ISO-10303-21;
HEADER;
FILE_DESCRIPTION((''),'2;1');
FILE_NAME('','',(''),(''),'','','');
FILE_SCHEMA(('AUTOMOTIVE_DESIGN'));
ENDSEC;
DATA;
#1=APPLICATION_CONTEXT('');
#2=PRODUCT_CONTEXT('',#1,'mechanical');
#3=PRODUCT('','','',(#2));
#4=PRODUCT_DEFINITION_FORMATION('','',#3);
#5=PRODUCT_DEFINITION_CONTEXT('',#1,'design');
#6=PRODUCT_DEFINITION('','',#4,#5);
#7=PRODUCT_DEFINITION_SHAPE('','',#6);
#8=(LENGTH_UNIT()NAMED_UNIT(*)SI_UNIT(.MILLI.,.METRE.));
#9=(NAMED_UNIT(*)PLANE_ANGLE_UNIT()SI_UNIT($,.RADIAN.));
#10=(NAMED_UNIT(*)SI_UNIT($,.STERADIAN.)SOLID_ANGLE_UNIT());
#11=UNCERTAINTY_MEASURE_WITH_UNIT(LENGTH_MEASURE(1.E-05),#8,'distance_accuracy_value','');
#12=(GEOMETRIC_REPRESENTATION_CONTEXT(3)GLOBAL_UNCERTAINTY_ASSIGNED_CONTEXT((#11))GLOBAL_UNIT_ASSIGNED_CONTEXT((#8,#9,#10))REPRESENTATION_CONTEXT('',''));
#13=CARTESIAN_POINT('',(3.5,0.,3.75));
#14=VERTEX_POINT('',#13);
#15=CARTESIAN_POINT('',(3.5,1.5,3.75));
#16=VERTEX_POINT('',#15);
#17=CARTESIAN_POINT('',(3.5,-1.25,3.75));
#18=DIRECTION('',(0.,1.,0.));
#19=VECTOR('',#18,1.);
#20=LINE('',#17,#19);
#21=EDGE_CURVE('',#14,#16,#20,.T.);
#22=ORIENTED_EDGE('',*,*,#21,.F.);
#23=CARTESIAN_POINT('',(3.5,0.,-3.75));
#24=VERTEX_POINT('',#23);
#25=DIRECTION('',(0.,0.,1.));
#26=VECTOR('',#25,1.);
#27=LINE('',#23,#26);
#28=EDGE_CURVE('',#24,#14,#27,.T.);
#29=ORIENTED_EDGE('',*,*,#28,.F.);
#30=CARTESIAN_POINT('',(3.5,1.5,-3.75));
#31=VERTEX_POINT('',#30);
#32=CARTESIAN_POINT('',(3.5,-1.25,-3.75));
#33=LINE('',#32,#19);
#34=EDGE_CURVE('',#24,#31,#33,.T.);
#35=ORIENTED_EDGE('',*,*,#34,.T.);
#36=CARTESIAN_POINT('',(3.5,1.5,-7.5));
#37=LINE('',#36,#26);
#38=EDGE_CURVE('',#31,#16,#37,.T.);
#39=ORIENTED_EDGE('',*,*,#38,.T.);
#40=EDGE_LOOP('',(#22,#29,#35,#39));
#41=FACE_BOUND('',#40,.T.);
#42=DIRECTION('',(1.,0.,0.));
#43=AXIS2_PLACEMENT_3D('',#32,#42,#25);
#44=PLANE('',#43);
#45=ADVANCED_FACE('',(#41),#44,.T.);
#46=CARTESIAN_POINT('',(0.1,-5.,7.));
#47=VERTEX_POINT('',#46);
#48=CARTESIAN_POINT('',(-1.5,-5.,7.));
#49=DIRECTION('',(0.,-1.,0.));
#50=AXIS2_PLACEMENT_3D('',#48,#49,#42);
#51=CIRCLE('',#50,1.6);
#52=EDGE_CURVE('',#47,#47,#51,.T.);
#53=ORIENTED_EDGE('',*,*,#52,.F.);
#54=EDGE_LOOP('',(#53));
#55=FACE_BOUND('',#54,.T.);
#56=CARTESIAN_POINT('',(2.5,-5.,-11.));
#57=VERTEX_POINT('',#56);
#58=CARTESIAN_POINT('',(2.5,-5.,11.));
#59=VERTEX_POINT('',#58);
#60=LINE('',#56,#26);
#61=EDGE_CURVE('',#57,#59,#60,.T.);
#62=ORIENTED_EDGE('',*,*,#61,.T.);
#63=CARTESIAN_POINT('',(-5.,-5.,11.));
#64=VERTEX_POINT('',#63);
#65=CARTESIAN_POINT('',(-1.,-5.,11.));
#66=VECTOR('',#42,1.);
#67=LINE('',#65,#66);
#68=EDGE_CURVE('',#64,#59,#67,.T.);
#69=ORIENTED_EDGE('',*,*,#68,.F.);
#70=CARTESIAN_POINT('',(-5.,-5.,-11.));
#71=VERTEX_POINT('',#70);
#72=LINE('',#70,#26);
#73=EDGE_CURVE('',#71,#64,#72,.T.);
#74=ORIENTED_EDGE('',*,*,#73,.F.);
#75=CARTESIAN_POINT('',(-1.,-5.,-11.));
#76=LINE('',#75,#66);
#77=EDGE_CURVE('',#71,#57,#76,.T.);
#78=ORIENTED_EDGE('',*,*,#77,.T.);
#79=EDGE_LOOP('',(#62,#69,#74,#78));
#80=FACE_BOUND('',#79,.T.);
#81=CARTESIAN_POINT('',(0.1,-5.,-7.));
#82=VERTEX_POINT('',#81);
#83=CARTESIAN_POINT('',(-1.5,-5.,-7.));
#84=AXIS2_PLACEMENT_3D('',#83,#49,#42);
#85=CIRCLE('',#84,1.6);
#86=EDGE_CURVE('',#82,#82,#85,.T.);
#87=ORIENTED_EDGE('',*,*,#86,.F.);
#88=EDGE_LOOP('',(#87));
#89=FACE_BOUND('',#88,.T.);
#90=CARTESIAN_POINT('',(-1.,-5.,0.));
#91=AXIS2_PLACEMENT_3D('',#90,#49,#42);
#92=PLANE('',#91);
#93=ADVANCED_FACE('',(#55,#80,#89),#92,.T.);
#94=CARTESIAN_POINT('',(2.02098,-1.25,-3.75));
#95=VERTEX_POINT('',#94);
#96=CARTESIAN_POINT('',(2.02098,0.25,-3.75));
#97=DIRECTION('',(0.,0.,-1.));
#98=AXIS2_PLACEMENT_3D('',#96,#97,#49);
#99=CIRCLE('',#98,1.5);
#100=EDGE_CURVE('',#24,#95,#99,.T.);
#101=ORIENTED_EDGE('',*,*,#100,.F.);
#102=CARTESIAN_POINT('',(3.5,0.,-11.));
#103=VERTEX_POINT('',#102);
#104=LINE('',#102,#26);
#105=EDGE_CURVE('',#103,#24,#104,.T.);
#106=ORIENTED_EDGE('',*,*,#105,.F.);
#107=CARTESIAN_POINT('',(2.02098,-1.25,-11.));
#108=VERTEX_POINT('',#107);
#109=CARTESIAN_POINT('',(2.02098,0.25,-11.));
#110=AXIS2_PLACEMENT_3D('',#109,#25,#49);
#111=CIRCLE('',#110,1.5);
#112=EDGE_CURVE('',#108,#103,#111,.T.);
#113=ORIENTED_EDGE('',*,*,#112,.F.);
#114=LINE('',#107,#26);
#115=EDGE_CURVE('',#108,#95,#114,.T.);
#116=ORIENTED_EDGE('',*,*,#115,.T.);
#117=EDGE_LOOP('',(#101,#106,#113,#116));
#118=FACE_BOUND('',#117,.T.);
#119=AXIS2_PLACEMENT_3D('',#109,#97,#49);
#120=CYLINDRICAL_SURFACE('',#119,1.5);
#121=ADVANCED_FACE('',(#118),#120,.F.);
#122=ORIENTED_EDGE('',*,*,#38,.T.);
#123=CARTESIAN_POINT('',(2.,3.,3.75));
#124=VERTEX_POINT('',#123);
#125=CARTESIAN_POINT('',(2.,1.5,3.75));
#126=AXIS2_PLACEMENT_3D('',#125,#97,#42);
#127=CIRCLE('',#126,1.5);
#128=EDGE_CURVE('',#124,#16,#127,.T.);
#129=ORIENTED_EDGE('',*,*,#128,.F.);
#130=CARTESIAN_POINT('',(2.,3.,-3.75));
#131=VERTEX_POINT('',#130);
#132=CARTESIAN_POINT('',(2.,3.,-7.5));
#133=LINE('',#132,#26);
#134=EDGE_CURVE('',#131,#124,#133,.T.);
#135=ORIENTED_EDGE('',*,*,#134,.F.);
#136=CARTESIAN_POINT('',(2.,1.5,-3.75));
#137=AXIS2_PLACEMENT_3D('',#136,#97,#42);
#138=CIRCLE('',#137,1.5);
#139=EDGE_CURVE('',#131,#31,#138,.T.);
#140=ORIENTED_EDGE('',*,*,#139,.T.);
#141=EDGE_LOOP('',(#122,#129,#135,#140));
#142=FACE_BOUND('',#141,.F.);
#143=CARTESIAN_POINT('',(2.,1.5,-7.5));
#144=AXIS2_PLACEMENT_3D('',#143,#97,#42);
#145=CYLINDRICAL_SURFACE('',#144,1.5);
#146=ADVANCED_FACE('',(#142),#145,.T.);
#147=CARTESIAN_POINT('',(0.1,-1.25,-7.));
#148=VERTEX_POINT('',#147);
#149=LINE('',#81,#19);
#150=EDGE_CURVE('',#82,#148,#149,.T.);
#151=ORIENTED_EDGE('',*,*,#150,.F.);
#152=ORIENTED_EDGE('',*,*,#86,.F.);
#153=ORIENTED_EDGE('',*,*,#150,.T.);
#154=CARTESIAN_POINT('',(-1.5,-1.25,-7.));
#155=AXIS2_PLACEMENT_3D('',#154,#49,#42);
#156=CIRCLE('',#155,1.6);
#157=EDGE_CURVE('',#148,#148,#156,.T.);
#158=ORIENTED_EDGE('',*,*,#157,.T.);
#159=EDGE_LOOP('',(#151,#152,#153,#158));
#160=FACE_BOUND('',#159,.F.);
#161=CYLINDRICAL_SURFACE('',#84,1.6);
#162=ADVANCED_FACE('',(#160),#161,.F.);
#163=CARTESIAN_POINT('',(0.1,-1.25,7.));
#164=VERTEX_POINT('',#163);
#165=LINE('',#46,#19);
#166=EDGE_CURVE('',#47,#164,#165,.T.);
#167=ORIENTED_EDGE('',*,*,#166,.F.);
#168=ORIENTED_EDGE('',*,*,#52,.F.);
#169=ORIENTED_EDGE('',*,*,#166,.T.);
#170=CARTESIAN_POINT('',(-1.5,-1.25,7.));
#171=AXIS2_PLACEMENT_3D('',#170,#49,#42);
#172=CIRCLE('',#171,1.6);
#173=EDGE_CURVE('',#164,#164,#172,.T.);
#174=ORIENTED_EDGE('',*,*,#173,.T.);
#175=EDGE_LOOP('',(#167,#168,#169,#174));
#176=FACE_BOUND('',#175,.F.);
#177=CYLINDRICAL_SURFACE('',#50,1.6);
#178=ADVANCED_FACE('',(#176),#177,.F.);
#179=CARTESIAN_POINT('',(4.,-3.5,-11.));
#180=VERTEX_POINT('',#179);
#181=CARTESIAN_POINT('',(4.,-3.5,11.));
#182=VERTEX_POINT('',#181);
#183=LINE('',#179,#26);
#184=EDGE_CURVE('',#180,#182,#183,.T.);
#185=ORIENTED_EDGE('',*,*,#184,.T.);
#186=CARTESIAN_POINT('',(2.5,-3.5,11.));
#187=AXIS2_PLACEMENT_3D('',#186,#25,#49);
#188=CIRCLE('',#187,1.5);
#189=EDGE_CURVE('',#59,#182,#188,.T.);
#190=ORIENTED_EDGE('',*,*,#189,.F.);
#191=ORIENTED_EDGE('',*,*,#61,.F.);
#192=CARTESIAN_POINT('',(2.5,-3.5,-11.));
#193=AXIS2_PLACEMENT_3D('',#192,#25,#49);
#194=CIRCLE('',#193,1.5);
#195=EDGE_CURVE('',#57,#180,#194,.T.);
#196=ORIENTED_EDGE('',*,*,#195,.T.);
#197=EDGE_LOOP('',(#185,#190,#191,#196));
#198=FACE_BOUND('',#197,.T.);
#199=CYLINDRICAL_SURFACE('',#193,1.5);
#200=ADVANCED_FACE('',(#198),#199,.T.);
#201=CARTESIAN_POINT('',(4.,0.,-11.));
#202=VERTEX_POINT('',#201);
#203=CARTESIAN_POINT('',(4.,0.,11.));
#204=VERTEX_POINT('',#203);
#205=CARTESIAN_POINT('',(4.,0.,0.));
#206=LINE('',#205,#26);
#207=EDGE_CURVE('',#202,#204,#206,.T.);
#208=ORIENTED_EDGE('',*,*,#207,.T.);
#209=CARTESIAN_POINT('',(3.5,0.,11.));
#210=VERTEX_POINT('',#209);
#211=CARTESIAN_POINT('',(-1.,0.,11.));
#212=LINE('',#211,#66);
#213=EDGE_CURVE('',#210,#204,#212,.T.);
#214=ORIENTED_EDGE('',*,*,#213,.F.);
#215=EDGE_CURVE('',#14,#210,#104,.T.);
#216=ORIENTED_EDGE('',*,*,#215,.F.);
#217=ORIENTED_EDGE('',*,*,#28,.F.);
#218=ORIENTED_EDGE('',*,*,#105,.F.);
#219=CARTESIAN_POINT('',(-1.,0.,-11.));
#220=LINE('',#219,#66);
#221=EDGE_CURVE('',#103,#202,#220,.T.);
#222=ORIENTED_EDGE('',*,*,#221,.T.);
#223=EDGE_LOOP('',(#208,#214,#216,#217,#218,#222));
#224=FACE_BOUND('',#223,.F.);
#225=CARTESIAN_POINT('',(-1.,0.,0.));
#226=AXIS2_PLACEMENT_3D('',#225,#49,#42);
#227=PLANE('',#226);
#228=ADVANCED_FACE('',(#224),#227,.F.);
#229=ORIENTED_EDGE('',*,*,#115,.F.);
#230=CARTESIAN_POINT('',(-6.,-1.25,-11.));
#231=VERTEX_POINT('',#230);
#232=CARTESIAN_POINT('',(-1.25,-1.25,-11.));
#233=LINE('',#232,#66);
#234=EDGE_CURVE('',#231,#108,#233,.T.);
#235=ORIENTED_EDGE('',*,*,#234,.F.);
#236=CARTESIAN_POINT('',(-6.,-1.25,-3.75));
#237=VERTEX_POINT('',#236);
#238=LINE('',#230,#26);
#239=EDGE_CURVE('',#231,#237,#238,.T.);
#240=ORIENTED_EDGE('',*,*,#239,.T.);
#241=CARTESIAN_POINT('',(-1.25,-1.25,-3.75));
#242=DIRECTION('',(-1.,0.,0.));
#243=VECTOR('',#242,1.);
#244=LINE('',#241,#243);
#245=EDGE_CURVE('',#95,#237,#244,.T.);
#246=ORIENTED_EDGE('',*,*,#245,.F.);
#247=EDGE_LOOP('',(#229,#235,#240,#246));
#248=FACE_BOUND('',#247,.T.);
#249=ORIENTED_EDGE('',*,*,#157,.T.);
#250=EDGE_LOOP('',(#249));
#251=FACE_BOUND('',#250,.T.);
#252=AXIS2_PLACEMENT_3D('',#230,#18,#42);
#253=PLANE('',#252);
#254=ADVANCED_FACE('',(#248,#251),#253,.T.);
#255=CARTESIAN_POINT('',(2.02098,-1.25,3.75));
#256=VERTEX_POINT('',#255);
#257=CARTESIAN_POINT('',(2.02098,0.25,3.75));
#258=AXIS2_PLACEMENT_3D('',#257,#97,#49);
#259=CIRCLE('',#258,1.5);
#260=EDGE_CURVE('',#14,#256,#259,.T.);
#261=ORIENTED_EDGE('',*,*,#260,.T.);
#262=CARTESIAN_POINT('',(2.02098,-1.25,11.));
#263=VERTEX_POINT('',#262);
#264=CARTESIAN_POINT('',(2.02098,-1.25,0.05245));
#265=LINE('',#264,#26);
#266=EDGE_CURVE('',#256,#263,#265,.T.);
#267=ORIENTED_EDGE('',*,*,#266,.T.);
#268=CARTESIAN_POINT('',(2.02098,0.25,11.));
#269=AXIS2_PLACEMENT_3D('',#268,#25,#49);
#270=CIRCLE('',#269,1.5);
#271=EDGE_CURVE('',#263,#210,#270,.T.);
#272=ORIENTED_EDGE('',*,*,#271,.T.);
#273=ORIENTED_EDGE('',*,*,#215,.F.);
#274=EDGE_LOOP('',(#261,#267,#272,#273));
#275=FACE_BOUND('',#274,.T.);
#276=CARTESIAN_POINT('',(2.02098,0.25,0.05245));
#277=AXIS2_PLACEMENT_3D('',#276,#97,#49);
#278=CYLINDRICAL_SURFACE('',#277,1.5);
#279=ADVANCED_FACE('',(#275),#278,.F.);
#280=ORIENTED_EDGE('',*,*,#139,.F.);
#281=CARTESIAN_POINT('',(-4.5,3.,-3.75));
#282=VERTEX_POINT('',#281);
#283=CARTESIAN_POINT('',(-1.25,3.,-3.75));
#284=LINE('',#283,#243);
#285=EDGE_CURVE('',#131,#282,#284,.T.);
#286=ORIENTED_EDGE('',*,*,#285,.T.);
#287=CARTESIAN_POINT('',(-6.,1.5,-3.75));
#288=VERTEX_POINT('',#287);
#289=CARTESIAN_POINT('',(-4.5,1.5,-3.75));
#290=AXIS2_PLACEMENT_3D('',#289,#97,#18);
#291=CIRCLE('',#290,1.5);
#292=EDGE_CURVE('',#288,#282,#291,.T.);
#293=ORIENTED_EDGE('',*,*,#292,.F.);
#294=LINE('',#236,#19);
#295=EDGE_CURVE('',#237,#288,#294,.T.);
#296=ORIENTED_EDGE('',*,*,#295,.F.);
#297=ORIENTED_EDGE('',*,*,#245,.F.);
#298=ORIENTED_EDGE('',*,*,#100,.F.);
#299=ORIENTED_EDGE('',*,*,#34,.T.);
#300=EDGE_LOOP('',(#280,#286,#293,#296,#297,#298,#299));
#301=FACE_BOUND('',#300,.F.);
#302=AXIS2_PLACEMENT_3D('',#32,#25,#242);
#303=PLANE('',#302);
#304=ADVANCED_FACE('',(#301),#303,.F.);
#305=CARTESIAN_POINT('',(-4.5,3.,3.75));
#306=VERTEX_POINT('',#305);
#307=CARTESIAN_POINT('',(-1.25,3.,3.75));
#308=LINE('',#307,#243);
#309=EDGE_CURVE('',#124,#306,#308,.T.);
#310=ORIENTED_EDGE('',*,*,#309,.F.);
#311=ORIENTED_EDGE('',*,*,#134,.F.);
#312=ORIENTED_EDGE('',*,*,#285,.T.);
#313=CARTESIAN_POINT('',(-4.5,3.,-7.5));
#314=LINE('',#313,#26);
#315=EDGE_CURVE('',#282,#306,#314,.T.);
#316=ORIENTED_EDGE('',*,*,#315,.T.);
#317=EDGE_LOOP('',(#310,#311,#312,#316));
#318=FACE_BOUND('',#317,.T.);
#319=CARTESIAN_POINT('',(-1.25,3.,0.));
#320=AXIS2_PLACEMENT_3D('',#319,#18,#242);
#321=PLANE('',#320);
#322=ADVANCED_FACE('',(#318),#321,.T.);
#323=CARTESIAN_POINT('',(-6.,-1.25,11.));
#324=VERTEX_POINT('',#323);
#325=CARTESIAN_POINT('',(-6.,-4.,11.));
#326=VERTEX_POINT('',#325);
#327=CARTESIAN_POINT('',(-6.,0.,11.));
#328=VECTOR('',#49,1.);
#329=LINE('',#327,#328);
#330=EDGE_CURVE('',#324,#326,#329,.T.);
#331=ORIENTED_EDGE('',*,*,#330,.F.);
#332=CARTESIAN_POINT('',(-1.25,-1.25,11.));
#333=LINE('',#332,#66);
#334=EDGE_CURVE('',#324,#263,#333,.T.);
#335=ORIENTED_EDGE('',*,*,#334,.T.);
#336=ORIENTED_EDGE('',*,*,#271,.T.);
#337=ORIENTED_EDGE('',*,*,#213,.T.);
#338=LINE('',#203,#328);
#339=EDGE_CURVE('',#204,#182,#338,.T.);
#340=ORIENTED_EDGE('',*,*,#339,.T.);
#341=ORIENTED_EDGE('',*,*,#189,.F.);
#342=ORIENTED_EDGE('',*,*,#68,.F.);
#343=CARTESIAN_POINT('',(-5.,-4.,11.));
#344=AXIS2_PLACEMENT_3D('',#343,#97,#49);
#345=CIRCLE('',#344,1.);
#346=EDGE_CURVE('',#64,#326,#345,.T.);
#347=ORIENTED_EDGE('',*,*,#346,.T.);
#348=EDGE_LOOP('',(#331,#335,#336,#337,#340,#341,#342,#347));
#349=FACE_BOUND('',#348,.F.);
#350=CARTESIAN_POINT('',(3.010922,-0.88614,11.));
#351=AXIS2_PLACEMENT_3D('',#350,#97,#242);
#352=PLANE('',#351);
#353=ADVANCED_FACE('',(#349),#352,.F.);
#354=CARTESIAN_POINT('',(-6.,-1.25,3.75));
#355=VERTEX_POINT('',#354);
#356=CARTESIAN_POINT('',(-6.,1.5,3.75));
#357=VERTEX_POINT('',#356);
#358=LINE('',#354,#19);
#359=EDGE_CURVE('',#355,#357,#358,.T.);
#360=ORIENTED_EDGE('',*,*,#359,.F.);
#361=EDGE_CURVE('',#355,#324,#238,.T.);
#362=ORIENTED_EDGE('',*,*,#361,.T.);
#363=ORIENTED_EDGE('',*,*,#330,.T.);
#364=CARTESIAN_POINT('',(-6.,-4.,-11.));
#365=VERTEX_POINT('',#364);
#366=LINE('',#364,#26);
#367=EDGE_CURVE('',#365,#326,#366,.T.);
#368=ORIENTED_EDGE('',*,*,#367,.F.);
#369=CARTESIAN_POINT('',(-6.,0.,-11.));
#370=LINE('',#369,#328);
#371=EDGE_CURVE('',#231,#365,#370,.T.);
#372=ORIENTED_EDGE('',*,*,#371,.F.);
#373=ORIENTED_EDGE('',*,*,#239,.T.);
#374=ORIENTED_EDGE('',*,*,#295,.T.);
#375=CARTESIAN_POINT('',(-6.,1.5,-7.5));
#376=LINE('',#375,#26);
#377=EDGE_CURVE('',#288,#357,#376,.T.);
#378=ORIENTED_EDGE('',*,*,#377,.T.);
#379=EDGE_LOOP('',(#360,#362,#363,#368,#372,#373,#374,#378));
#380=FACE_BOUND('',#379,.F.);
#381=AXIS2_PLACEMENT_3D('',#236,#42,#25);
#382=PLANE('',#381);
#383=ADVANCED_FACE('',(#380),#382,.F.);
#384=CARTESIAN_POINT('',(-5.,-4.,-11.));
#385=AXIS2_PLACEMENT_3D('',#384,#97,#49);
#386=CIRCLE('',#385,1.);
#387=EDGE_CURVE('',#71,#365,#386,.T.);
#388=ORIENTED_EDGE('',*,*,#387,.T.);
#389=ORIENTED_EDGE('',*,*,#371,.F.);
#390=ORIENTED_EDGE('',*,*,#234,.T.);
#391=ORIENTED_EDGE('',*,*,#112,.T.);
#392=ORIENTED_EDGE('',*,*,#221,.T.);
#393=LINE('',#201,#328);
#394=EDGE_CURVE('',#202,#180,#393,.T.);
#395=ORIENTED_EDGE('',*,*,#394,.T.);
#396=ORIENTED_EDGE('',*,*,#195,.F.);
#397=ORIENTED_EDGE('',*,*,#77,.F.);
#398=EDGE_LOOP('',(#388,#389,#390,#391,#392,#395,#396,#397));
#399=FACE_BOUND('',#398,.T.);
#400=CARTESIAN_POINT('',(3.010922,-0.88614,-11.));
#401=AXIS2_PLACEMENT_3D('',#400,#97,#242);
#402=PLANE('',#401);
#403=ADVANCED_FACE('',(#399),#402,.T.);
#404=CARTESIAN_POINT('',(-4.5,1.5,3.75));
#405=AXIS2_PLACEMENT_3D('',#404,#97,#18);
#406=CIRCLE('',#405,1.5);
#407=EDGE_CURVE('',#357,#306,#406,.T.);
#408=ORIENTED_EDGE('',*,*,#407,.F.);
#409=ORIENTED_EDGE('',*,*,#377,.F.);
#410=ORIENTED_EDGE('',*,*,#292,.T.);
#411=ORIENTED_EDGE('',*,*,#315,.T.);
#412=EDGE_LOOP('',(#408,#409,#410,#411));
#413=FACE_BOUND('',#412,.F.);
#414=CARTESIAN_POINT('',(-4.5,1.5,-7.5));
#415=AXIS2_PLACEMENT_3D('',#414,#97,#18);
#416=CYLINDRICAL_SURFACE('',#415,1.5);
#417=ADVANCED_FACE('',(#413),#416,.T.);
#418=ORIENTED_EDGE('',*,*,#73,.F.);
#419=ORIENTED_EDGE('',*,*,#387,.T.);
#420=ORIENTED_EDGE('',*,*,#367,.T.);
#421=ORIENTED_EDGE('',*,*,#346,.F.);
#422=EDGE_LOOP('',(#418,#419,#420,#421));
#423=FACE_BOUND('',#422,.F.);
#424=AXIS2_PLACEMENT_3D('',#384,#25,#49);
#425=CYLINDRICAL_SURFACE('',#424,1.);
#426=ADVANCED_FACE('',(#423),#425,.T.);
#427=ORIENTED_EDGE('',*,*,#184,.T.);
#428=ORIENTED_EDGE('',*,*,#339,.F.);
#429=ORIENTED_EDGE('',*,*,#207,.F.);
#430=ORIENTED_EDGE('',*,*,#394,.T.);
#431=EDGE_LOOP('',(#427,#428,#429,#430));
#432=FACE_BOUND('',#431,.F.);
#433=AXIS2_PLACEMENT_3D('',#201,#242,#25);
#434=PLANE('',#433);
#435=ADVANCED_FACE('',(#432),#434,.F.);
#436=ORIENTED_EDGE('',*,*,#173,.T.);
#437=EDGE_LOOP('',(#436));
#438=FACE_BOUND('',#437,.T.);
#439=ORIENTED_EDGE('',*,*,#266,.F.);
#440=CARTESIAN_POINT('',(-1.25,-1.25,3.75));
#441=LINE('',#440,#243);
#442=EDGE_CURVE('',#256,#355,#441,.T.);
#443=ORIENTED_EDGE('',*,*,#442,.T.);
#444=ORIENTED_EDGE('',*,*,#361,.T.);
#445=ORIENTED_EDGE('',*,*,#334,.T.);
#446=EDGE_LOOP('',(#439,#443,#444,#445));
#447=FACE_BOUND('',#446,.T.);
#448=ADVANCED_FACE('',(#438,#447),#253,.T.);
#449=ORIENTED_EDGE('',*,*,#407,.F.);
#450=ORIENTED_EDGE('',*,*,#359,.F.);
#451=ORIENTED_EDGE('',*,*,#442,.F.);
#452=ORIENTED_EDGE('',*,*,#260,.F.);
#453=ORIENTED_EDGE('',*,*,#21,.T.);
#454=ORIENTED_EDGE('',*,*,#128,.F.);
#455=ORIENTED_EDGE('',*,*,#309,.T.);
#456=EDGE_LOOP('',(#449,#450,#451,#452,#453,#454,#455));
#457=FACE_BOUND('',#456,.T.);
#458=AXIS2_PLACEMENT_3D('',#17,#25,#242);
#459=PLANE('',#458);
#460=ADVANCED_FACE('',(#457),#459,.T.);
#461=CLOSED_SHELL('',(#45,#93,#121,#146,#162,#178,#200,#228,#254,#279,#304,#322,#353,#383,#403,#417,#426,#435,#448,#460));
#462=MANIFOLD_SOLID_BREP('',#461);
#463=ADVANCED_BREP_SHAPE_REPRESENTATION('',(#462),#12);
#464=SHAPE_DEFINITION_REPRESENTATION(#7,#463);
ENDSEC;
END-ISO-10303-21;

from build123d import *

# Parameters (mm, degrees)
F0_W        = 10
F0_H        = 22
F1_DEPTH    = 5
F2_W        = 9.5
F2_H        = 1.25
F3_DEPTH    = 22
F4_R        = 1.5
F5_R        = 1.6
F6_DEPTH    = 3.75
F7_W        = 9.5
F7_H        = 7.5
F8_DEPTH    = 4.25
F9_T1_DEPTH = 10.9475498644
F9_T3_DEPTH = 10.9475498644
F9_T5_DEPTH = 15
F9_T7_DEPTH = 15
F10_R       = 1


# Not quite as in the source:
# - a fillet or chamfer that OpenCascade refuses, or shapes differently, is made with other operations: its cross-section is extruded or revolved along the edge and cut away or added


with BuildPart() as f1:
    # F0 (on Front) → F1 (new body)
    with BuildSketch(Plane.XZ):
        with Locations((-1, 0)):
            Rectangle(F0_W, F0_H)
    extrude(amount=F1_DEPTH)

    # F2 (on face) → F3 (cut, through all)
    with BuildSketch(Plane(origin=(0, 0, -11), x_dir=(1, 0, 0), z_dir=(0, 0, -1))):
        with Locations((-1.25, 0.625)):
            Rectangle(F2_W, F2_H)
    extrude(amount=-F3_DEPTH, mode=Mode.SUBTRACT)

    # F4
    f4_edges = [f1.edges().sort_by_distance(p)[0] for p in [
        (4, -5, 0),
    ]]
    fillet(f4_edges, radius=F4_R)

    # F5 (on face) → F6 (cut, through all)
    with BuildSketch(Plane.XZ.offset(5)):
        with Locations((-1.5, 7)):
            Circle(F5_R)
        with Locations((-1.5, -7)):
            Circle(F5_R)
    extrude(amount=-F6_DEPTH, mode=Mode.SUBTRACT)

    # F7 (on face) → F8 (join)
    with BuildSketch(Plane(origin=(0, -1.25, 0), x_dir=(-1, 0, 0), z_dir=(0, 1, 0))):
        with Locations((1.25, 0)):
            Rectangle(F7_W, F7_H)
    extrude(amount=F8_DEPTH)

    # F9: fillet of radius 1.5 on 4 edges, made by hand

    # F9_s2 → F9_t1 (join)
    with BuildSketch(Plane.XY.offset(0.0524501356)):
        with BuildLine():
            ThreePointArc((2.0209800542, -1.25), (2.9892258908, -0.8956439237), (3.5, 0))
            Line((3.5, 0), (3.5, -1.25))
            Line((3.5, -1.25), (2.0209800542, -1.25))
        make_face()
    extrude(amount=F9_T1_DEPTH)

    # F9_s4 → F9_t3 (join)
    with BuildSketch(Plane.XY.offset(-11)):
        with BuildLine():
            ThreePointArc((2.0209800542, -1.25), (2.9892258908, -0.8956439237), (3.5, 0))
            Line((3.5, 0), (3.5, -1.25))
            Line((3.5, -1.25), (2.0209800542, -1.25))
        make_face()
    extrude(amount=F9_T3_DEPTH)

    # F9_s6 → F9_t5 (cut)
    with BuildSketch(Plane.XY.offset(-7.5)):
        with BuildLine():
            ThreePointArc((-4.5, 3), (-5.5606601718, 2.5606601718), (-6, 1.5))
            Line((-6, 1.5), (-6, 3))
            Line((-6, 3), (-4.5, 3))
        make_face()
    extrude(amount=F9_T5_DEPTH, mode=Mode.SUBTRACT)

    # F9_s8 → F9_t7 (cut)
    with BuildSketch(Plane.XY.offset(-7.5)):
        with BuildLine():
            ThreePointArc((3.5, 1.5), (3.0606601718, 2.5606601718), (2, 3))
            Line((2, 3), (3.5, 3))
            Line((3.5, 3), (3.5, 1.5))
        make_face()
    extrude(amount=F9_T7_DEPTH, mode=Mode.SUBTRACT)

    # F10
    f10_edges = [f1.edges().sort_by_distance(p)[0] for p in [
        (-6, -5, 0),
    ]]
    fillet(f10_edges, radius=F10_R)


solid = f1.part
